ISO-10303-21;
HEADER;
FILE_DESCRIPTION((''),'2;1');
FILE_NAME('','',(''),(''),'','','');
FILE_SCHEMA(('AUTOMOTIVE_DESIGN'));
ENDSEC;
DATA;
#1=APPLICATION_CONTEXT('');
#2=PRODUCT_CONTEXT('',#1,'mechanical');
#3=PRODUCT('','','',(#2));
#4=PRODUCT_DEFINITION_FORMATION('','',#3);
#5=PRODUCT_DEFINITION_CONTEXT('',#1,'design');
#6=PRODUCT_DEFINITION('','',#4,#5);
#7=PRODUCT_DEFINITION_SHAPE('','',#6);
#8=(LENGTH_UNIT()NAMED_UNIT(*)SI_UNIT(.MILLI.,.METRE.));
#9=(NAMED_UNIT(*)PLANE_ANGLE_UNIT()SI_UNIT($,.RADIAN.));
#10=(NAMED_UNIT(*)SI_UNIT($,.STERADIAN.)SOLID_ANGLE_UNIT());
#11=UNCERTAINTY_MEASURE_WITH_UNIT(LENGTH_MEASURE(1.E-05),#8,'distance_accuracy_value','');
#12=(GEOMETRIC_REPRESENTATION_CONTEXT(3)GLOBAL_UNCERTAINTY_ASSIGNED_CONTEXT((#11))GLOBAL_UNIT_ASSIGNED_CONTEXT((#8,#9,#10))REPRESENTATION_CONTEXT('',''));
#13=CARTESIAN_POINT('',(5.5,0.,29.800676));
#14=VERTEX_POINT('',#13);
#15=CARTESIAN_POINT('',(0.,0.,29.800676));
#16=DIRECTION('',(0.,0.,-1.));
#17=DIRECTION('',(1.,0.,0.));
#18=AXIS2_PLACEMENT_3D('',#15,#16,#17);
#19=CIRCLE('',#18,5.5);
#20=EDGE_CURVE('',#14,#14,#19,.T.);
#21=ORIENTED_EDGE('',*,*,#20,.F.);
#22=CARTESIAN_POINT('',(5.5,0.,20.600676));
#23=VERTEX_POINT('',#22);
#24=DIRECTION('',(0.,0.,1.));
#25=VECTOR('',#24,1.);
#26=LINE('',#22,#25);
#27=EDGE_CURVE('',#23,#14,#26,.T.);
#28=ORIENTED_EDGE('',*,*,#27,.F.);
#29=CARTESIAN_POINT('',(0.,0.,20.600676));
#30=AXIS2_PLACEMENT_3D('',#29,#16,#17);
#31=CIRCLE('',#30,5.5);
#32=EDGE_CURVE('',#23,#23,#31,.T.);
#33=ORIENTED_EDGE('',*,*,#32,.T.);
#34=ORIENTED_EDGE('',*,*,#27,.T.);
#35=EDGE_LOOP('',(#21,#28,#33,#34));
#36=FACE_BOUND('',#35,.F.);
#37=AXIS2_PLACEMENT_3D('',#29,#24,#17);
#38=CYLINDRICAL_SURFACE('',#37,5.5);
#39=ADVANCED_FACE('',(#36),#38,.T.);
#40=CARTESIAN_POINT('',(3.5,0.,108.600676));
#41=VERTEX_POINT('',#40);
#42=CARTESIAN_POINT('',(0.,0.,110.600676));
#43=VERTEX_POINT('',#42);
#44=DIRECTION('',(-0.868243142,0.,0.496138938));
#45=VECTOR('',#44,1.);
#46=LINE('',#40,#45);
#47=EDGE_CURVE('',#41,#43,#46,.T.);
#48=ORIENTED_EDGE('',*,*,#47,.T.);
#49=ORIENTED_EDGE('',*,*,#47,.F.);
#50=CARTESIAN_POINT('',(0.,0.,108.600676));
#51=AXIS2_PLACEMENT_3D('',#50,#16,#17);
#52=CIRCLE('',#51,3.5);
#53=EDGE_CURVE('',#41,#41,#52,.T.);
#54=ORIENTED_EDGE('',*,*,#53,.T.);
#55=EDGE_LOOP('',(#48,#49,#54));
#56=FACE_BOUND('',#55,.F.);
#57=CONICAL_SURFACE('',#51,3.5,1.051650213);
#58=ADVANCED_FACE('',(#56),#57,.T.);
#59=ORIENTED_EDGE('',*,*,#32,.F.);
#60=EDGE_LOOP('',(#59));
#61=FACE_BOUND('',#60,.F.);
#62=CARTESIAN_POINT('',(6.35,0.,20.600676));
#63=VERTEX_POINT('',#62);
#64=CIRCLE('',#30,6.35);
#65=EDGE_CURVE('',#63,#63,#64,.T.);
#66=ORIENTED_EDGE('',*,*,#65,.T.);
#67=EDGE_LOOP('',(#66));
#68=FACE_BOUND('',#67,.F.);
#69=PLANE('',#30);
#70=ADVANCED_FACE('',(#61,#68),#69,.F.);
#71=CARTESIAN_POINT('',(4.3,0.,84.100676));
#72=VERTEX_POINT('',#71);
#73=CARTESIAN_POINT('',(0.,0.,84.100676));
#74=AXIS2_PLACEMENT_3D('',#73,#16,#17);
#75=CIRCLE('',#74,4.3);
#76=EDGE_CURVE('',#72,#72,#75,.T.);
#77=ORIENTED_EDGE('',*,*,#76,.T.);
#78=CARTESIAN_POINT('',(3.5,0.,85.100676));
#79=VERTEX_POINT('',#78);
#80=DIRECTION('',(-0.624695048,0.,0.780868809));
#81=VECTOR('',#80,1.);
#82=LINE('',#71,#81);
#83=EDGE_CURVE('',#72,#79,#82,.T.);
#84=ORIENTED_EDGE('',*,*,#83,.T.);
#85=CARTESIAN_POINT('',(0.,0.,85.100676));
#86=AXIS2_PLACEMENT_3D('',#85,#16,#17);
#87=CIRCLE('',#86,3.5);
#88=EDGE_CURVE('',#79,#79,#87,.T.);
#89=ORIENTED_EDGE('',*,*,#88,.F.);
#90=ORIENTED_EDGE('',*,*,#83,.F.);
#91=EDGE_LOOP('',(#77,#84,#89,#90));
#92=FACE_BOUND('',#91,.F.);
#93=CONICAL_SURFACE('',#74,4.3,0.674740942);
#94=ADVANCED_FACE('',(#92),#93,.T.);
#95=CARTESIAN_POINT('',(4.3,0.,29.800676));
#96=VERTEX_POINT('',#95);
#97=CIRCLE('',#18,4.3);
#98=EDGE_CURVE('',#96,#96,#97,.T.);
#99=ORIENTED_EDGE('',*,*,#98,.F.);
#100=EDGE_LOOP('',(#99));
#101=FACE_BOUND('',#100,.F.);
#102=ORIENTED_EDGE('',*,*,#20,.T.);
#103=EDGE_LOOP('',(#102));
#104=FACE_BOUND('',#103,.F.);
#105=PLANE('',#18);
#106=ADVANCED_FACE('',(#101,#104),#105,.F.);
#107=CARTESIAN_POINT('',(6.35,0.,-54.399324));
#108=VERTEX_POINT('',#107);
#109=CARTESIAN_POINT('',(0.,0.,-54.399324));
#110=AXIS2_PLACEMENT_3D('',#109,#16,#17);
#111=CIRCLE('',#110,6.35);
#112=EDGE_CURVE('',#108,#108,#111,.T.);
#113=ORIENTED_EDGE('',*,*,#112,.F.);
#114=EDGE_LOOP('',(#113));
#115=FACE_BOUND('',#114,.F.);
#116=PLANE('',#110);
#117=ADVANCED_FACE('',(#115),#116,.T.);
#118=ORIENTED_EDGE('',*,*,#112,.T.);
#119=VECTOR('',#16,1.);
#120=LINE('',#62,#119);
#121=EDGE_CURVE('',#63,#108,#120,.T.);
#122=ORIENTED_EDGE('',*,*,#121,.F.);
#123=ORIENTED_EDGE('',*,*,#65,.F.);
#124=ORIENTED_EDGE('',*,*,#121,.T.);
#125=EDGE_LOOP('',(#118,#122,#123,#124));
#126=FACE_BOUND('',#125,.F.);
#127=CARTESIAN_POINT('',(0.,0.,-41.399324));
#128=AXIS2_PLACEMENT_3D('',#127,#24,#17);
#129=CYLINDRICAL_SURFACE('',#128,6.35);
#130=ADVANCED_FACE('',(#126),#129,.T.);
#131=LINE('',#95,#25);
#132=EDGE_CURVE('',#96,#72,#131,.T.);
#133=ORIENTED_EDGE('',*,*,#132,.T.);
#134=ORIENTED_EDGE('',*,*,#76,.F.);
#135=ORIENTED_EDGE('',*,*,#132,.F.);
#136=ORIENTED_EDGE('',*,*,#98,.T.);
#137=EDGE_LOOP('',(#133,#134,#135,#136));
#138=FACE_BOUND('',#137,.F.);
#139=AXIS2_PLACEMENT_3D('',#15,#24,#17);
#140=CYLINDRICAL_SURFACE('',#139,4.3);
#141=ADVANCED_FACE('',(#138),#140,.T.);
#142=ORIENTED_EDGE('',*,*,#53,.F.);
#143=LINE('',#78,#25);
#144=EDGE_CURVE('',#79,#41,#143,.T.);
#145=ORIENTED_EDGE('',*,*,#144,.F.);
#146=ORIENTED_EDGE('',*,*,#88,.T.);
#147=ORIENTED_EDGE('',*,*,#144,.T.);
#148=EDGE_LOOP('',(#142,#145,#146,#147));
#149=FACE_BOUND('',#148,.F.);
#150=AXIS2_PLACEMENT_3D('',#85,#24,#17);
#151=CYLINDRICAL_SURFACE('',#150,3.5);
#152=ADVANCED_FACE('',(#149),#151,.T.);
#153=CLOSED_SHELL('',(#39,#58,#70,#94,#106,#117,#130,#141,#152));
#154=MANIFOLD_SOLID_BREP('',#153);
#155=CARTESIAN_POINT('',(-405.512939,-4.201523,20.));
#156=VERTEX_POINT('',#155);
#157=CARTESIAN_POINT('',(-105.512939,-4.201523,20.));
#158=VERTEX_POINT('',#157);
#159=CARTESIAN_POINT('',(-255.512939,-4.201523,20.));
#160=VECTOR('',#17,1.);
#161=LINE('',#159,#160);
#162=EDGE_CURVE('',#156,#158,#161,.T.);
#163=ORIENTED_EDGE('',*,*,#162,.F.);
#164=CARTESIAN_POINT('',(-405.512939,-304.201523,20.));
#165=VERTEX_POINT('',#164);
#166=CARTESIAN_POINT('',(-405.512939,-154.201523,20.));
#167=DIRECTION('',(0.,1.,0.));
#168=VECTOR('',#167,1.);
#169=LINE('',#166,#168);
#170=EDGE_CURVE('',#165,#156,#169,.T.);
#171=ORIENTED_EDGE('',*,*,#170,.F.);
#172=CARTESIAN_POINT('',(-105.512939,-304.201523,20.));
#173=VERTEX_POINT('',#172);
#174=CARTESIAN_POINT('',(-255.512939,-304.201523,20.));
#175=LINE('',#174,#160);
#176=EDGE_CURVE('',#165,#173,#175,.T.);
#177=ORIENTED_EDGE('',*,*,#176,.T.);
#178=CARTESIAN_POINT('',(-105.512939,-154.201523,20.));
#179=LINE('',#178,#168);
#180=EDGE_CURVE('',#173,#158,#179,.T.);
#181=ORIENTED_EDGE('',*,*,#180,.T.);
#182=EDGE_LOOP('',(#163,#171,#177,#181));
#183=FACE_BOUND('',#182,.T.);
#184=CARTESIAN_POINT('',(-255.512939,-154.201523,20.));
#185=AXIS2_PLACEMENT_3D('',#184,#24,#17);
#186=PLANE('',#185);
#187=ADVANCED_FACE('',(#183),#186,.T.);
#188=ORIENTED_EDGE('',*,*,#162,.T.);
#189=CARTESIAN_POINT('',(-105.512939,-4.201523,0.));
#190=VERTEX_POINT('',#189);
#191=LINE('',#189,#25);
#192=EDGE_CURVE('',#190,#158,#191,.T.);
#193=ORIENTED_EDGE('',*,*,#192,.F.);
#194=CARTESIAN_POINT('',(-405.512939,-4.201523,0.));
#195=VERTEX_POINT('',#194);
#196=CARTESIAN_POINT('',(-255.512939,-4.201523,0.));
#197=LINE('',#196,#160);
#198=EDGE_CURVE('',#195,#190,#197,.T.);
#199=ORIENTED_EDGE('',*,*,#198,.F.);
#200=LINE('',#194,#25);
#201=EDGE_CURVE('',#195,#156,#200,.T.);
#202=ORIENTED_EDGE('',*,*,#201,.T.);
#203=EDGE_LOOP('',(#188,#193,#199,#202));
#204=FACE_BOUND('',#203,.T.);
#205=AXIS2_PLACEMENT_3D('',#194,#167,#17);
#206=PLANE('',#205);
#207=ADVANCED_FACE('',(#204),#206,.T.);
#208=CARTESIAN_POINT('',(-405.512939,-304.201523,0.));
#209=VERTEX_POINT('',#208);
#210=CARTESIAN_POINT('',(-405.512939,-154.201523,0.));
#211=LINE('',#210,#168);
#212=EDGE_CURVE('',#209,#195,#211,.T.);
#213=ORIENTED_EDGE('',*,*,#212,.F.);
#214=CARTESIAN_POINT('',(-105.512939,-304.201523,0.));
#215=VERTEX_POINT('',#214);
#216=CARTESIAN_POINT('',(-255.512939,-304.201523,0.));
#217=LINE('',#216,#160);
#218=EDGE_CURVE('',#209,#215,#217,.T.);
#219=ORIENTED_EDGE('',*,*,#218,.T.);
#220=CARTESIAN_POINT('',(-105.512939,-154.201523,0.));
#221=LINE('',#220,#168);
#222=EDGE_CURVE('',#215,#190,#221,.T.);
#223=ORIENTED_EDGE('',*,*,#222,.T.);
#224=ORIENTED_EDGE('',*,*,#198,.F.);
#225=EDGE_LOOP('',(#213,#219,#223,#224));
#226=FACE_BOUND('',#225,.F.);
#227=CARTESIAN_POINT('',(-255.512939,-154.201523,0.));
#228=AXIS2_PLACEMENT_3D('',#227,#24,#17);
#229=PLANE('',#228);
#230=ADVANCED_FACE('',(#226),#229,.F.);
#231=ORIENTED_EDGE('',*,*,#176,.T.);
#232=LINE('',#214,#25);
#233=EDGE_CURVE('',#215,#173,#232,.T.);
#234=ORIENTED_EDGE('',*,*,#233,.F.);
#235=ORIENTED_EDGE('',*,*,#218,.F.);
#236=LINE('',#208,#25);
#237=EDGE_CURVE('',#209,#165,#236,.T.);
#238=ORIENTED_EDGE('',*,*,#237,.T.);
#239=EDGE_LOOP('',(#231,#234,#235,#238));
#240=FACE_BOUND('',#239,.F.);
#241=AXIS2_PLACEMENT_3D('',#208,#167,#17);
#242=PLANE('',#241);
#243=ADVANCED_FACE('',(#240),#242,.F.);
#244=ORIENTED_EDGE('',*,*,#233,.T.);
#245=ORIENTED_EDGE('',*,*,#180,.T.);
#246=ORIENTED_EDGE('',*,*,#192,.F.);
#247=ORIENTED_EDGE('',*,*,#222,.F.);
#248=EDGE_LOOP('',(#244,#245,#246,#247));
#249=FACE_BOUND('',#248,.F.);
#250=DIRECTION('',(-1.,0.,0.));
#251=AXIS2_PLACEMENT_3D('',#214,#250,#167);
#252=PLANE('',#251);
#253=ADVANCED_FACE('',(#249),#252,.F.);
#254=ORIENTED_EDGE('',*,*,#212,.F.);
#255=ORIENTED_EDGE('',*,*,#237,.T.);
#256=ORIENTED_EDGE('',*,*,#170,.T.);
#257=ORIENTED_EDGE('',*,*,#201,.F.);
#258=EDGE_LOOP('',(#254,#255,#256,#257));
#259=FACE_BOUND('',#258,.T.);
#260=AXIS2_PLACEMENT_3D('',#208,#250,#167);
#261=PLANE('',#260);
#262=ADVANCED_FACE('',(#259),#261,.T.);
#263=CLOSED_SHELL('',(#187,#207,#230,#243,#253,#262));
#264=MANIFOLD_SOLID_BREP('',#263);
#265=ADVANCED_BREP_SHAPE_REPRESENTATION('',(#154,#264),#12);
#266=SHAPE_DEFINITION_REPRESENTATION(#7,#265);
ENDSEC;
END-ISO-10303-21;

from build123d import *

# Parameters (mm, degrees)
F2_W     = 300
F2_H     = 300
F3_DEPTH = 20
F4_DEPTH = 13


# Not quite as in the source:
# - a feature names something its author has since deleted; it is built from what else it names


with BuildPart() as f1:
    # F0 (on Front) → F1 (revolve)
    with BuildSketch(Plane.XZ):
        Polygon((3.5, 108.6006758511), (0, 110.6006758511), (0, -41.3993241489), (6.35, -41.3993241489), (6.35, 20.6006758511), (5.5, 20.6006758511), (5.5, 29.8006758511), (4.3, 29.8006758511), (4.3, 84.1006758511), (3.5, 85.1006758511), align=None)
    revolve(axis=Axis((0, 0, 34.6006758511), (0, 0, -1)))

    # F4 (add): a face of the model
    f4_faces = [f1.faces().sort_by_distance(p)[0] for p in [
        (0, 0, -41.3993241489),
    ]]
    extrude(f4_faces, amount=F4_DEPTH)


with BuildPart() as f3:
    # F2 (on Top) → F3 (new body)
    with BuildSketch(Plane.XY):
        with Locations((-255.5129393935, -154.2015225627)):
            Rectangle(F2_W, F2_H)
    extrude(amount=F3_DEPTH)


solid = Compound([f1.part, f3.part])
